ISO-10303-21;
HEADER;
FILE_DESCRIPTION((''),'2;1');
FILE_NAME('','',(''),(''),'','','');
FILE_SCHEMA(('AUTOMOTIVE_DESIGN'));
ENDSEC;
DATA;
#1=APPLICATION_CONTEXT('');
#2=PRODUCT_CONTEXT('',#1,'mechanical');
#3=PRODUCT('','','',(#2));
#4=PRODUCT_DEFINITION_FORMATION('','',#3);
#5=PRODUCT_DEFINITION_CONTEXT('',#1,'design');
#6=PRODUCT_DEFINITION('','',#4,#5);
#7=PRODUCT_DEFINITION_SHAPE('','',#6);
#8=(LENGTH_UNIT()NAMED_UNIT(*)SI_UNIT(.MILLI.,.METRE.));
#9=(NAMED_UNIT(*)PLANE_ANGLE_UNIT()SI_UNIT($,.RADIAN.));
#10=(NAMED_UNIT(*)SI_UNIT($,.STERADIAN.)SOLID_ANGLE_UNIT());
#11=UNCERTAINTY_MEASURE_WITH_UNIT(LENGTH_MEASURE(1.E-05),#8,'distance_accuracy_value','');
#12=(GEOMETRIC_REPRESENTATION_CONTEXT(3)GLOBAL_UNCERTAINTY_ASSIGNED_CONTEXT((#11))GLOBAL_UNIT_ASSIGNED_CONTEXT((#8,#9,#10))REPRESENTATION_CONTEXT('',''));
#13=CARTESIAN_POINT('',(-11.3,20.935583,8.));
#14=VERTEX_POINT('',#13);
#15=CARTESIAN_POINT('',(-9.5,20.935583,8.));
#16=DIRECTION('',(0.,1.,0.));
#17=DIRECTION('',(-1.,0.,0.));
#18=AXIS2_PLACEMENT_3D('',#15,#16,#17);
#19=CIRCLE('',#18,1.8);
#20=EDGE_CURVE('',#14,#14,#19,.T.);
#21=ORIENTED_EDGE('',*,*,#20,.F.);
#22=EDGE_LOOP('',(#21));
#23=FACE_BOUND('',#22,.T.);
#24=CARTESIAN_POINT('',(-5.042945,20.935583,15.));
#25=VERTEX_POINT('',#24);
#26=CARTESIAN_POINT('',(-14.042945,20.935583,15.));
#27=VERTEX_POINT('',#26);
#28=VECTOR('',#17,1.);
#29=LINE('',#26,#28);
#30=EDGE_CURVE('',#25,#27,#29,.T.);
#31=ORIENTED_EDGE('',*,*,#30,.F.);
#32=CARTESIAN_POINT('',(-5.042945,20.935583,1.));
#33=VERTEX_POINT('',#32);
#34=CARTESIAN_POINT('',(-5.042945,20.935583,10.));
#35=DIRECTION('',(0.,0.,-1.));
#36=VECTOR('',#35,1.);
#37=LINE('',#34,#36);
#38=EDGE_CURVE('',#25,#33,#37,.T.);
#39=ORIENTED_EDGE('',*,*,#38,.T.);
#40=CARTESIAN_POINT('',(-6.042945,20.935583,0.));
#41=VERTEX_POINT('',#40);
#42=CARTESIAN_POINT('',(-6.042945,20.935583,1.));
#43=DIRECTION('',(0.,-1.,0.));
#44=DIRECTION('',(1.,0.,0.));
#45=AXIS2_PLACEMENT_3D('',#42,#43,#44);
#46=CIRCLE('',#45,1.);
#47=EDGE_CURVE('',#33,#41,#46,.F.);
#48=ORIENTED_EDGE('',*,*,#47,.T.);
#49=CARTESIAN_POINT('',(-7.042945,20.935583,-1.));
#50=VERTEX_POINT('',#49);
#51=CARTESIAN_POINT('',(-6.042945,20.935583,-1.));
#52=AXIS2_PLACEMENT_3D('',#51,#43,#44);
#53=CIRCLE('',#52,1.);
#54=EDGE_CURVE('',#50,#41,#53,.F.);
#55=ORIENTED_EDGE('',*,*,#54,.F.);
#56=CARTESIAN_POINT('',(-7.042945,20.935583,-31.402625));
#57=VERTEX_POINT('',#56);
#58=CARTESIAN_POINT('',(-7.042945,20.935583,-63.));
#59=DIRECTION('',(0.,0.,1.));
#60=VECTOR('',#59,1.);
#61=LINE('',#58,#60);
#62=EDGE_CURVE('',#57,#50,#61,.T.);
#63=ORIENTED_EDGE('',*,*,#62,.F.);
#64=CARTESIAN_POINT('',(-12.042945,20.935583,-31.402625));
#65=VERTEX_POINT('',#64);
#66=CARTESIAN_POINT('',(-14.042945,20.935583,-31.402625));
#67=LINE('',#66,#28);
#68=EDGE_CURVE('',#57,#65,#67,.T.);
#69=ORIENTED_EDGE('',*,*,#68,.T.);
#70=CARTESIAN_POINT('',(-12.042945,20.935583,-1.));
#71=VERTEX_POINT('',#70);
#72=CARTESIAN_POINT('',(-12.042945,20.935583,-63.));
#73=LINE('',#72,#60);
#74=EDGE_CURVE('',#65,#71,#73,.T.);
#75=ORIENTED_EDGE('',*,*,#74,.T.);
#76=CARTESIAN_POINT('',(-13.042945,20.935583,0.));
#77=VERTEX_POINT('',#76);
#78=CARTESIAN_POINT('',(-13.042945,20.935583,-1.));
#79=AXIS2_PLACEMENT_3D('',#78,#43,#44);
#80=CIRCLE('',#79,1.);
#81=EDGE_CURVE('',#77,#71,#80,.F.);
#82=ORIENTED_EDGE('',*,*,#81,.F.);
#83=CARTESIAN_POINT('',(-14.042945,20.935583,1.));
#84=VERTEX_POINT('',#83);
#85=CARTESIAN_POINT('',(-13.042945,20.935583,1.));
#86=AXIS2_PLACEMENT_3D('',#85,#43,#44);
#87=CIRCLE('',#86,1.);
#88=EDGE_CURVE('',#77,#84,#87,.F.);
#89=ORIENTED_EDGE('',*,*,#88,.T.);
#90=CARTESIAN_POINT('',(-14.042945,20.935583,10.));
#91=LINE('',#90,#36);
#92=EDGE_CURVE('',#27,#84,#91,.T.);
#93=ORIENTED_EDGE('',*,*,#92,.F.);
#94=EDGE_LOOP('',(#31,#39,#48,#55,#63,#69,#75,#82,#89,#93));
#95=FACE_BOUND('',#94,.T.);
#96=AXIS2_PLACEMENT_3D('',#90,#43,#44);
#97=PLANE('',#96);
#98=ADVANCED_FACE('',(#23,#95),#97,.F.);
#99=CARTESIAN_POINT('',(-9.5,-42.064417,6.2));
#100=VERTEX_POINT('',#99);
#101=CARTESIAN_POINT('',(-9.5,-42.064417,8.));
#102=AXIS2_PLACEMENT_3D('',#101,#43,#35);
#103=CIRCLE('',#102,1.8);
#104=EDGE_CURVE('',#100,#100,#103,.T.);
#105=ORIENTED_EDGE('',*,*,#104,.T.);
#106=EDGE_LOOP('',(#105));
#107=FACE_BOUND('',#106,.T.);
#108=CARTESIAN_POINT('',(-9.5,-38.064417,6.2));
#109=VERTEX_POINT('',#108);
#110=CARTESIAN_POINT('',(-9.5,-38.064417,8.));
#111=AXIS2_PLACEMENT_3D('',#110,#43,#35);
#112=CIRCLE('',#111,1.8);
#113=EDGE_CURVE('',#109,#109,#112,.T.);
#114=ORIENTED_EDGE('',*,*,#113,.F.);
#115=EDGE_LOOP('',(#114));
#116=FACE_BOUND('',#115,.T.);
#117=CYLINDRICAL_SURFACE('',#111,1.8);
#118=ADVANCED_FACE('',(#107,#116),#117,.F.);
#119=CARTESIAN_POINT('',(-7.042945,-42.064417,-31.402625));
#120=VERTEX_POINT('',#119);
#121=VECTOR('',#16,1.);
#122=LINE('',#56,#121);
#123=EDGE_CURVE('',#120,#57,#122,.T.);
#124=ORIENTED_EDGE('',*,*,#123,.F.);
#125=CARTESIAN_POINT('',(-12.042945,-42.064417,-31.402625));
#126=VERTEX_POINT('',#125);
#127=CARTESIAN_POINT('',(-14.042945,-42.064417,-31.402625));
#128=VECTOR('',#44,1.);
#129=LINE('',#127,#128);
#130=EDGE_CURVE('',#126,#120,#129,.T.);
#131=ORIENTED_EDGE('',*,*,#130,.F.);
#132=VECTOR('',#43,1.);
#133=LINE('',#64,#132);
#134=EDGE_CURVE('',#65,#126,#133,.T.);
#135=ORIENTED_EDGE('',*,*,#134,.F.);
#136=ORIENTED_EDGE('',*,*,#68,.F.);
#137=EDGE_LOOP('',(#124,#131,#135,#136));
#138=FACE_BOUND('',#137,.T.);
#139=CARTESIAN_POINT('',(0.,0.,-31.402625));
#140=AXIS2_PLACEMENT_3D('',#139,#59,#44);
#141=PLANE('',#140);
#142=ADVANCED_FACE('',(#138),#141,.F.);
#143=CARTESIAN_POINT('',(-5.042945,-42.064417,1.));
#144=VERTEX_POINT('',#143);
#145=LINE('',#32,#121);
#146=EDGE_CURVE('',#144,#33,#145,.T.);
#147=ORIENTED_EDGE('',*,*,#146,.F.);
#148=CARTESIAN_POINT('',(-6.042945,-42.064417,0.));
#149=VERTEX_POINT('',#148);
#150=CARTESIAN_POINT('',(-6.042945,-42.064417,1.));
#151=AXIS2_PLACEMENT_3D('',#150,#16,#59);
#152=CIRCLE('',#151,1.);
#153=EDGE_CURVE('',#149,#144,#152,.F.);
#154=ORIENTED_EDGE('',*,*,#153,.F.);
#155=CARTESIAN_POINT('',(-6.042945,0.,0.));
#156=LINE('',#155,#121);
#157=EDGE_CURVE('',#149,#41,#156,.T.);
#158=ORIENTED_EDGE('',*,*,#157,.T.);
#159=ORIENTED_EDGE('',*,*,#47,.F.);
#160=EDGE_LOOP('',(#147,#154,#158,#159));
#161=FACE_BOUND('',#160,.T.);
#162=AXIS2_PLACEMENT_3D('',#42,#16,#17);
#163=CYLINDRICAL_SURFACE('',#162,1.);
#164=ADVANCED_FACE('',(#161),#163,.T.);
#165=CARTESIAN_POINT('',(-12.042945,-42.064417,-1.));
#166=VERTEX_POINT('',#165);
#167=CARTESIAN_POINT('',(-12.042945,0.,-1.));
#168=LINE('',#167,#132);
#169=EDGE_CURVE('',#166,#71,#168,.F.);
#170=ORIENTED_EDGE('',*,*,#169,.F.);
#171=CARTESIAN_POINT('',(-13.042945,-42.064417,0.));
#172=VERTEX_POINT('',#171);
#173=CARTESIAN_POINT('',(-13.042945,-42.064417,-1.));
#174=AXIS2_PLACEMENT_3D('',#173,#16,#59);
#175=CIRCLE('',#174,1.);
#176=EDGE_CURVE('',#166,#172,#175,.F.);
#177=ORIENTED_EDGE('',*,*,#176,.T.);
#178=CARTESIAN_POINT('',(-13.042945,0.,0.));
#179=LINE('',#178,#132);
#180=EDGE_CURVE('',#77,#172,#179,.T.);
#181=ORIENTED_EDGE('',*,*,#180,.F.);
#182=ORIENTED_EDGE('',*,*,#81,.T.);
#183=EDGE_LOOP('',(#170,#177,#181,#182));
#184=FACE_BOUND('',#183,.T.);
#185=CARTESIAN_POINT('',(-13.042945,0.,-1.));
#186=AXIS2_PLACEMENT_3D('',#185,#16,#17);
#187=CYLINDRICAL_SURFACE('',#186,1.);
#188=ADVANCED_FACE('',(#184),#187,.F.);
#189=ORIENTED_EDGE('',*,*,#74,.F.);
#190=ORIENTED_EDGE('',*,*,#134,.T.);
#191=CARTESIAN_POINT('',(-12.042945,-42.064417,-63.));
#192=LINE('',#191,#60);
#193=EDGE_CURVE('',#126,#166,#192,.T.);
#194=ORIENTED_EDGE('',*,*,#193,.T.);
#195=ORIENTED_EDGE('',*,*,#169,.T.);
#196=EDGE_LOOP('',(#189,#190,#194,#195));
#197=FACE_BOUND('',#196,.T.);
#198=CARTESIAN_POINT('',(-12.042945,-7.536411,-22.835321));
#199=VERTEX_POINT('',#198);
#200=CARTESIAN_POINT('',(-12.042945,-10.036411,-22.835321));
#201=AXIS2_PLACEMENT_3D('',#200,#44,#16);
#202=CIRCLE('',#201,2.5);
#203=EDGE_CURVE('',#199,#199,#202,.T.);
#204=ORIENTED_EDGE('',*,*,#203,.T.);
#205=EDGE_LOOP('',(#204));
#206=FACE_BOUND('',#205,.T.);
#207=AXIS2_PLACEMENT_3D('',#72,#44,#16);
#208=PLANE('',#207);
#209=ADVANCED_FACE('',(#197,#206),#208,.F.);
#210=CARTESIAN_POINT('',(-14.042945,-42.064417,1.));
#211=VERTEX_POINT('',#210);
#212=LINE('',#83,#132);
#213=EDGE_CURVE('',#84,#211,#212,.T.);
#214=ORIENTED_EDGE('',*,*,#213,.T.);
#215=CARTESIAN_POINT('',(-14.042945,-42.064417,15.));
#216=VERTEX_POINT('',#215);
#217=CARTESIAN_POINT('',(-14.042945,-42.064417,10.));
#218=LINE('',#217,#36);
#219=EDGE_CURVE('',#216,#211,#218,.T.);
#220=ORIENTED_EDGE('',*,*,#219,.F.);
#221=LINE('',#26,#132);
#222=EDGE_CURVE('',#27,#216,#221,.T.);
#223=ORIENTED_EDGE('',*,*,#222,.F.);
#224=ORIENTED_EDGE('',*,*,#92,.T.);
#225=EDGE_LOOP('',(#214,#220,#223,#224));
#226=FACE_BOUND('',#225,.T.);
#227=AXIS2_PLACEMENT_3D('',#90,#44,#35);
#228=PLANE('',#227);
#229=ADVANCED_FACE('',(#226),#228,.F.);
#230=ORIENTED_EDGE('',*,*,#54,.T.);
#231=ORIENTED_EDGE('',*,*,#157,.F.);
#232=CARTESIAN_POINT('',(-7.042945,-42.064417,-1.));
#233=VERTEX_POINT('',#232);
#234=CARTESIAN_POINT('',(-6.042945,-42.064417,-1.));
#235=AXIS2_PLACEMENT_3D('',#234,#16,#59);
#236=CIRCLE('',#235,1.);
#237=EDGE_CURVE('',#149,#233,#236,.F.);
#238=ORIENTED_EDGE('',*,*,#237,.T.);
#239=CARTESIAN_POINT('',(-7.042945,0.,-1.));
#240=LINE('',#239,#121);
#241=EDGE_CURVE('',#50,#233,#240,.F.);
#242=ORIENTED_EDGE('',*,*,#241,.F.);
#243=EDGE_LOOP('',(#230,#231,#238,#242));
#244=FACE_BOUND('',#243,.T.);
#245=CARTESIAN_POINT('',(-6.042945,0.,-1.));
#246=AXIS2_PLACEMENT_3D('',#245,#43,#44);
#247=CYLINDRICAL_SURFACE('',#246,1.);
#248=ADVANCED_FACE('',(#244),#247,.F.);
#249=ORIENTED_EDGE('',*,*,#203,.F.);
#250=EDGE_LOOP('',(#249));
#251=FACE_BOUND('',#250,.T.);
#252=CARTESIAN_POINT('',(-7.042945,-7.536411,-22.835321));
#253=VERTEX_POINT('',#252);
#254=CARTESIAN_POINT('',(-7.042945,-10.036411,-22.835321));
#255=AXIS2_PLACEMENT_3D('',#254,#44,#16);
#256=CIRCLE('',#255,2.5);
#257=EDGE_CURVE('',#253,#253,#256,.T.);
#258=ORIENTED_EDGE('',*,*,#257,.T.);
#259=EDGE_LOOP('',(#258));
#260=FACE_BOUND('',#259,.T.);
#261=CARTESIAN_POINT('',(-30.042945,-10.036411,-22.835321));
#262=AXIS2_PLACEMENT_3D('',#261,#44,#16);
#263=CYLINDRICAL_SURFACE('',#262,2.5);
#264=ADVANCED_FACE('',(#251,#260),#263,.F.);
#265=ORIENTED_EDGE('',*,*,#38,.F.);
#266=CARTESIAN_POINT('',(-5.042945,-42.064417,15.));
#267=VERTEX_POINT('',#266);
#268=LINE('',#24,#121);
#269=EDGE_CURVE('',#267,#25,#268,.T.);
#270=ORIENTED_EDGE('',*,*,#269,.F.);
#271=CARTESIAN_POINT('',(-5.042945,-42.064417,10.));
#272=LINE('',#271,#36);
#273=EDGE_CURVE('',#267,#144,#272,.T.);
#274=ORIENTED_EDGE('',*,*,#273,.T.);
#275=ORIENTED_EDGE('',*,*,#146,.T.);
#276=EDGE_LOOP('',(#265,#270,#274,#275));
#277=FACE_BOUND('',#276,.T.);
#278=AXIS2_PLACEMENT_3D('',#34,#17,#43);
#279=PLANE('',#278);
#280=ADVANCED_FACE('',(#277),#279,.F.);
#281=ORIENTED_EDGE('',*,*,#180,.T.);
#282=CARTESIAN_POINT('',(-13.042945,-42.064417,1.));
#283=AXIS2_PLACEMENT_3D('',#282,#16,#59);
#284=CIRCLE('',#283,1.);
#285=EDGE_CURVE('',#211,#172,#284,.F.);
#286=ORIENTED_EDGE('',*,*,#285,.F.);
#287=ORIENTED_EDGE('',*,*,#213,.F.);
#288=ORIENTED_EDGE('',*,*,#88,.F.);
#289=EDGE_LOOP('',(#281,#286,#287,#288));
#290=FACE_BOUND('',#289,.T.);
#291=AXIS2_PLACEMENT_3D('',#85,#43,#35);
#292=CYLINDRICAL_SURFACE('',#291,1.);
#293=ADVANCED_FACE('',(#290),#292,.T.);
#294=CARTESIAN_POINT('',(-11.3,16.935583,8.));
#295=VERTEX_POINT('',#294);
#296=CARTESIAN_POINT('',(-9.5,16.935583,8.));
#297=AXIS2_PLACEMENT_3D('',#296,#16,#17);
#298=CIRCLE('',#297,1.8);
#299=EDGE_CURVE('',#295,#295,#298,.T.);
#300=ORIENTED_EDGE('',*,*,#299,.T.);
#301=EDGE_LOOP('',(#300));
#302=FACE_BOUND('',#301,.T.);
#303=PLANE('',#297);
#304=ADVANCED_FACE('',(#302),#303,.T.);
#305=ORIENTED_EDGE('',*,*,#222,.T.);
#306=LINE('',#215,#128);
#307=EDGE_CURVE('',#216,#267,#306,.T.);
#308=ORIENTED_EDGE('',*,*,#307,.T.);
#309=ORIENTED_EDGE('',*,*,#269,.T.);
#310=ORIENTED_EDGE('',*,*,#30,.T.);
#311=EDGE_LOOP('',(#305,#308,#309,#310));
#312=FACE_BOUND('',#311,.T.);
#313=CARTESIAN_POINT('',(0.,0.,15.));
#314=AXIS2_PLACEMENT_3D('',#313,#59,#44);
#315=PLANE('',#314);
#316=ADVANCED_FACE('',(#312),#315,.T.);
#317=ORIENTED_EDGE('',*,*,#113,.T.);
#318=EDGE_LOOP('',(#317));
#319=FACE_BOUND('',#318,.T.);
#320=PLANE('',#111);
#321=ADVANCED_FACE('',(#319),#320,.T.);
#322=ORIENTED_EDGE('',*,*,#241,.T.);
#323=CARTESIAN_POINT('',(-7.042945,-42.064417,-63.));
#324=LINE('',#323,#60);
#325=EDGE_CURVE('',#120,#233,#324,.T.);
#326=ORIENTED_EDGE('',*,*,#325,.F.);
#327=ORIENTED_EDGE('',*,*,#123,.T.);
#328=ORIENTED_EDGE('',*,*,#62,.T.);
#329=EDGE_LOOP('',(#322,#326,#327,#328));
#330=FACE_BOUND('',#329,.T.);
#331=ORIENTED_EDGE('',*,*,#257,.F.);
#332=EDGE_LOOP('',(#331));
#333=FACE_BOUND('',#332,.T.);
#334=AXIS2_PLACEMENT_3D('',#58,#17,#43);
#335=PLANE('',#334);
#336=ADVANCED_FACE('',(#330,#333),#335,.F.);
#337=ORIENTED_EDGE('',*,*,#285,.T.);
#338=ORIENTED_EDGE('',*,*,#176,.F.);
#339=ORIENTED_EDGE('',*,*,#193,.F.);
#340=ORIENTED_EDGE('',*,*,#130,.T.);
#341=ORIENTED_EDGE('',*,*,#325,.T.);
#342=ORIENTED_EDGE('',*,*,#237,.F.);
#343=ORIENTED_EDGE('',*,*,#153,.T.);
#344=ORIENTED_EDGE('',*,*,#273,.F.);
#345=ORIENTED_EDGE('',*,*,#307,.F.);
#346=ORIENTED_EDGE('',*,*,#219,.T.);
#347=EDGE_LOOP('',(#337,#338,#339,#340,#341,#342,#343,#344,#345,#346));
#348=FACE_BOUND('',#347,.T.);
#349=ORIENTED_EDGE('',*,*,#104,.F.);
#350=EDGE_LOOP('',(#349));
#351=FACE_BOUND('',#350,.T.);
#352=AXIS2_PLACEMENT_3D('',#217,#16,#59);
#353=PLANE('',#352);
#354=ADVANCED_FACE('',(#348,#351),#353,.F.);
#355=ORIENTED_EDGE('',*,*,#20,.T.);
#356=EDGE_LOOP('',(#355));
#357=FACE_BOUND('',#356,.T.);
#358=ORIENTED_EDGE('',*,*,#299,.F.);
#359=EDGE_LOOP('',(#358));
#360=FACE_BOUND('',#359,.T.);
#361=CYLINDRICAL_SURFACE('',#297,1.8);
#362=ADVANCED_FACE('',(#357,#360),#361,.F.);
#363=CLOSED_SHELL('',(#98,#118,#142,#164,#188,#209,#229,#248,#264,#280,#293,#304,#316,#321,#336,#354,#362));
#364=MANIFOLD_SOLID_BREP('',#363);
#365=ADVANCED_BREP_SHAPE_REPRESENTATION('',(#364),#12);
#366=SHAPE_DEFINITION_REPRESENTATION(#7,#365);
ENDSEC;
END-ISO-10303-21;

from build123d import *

# Parameters (mm, degrees)
ESQUISSE1_W                  = 9
ESQUISSE1_H                  = 63
BOSS_EXTRU_1_DEPTH           = 10
ESQUISSE2_W                  = 5
ESQUISSE2_H                  = 63
BOSS_EXTRU_2_DEPTH           = 63
CONG_3_R                     = 1
CONG_4_R                     = 1
CONG_5_R                     = 1
CONG_6_R                     = 1
ESQUISSE3_R                  = 2.5
ENL_V_MAT_EXTRU_1_DEPTH      = 77.075062882
ENL_V_MAT_EXTRU_3_DEPTH      = 77.075062882
ENL_V_MAT_EXTRU_3_DEPTH_BACK = 77.075062882
ESQUISSE9_R                  = 2.5
ENL_V_MAT_EXTRU_4_DEPTH      = 23
ESQUISSE12_W                 = 9
ESQUISSE12_H                 = 63
BOSS_EXTRU_4_DEPTH           = 5
ESQUISSE13_R                 = 1.8
ENL_V_MAT_EXTRU_6_DEPTH      = 4
ENL_V_START                  = -4
ESQUISSE14_R                 = 1.8
ENL_V_MAT_EXTRU_7_DEPTH      = 4


with BuildPart() as part:
    # Esquisse1 → Boss.-Extru.1 (new body)
    with BuildSketch(Plane.XY):
        with Locations((-9.542944785, -10.564417178)):
            Rectangle(ESQUISSE1_W, ESQUISSE1_H)
    extrude(amount=BOSS_EXTRU_1_DEPTH)

    # Esquisse2 → Boss.-Extru.2 (add)
    with BuildSketch(Plane(origin=(0, 0, 0), x_dir=(-1, 0, 0), z_dir=(0, 0, -1))):
        with Locations((9.542944785, -10.564417178)):
            Rectangle(ESQUISSE2_W, ESQUISSE2_H)
    extrude(amount=BOSS_EXTRU_2_DEPTH)

    # Congé3
    cong_3_edges = [part.edges().sort_by_distance(p)[0] for p in [
        (-7.042944785, -10.564417178, 0),
    ]]
    fillet(cong_3_edges, radius=CONG_3_R)

    # Congé4
    cong_4_edges = [part.edges().sort_by_distance(p)[0] for p in [
        (-12.042944785, -10.564417178, 0),
    ]]
    fillet(cong_4_edges, radius=CONG_4_R)

    # Congé5
    cong_5_edges = [part.edges().sort_by_distance(p)[0] for p in [
        (-5.042944785, -10.564417178, 0),
    ]]
    fillet(cong_5_edges, radius=CONG_5_R - 0.0001)  # a hair under: the kernel refuses the full size

    # Congé6
    cong_6_edges = [part.edges().sort_by_distance(p)[0] for p in [
        (-14.042944785, -10.564417178, 0),
    ]]
    fillet(cong_6_edges, radius=CONG_6_R - 0.0001)  # a hair under: the kernel refuses the full size

    # Esquisse3 → Enlèv. mat.-Extru.1 (cut, through all)
    with BuildSketch(Plane.ZY.offset(12.042944785)):
        with Locations(Location((-43, -10.564417178, 0), (0, 0, 270))):
            Circle(ESQUISSE3_R)
    extrude(amount=-ENL_V_MAT_EXTRU_1_DEPTH, mode=Mode.SUBTRACT)

    # Esquisse7 → Enlèv. mat.-Extru.3 (cut, two sides: drawn at the far end of the back side and taken through both)
    with BuildSketch(Plane(origin=(-7.042944785, 0, 0), x_dir=(0, 0, -1), z_dir=(1, 0, 0)).offset(-ENL_V_MAT_EXTRU_3_DEPTH_BACK)):
        Polygon((51.248405369, 207.781395644), (51.248405369, 20.935582822), (51.248405369, -42.839359106), (51.248405369, -229.685171928), (424.940031013, -229.685171928), (424.940031013, 207.781395644), align=None)
    extrude(amount=ENL_V_MAT_EXTRU_3_DEPTH + ENL_V_MAT_EXTRU_3_DEPTH_BACK, mode=Mode.SUBTRACT)


with BuildPart() as body_2:
    # Fractionner1: the piece on the far side of the plane
    add(part.part)
    split(bisect_by=Plane.XY.offset(-31.402624734), keep=Keep.BOTTOM)


with BuildPart() as part_1:
    add(part.part)

    # Fractionner1
    split(bisect_by=Plane.XY.offset(-31.402624734), keep=Keep.TOP)

    # Esquisse9 → Enlèv. mat.-Extru.4 (cut)
    with BuildSketch(Plane(origin=(-7.042944785, 0, 0), x_dir=(0, 0, -1), z_dir=(1, 0, 0))):
        with Locations(Location((22.835321424, -10.036411033, 0), (0, 0, 90))):
            Circle(ESQUISSE9_R)
    extrude(amount=-ENL_V_MAT_EXTRU_4_DEPTH, mode=Mode.SUBTRACT)

    # Esquisse12 → Boss.-Extru.4 (add)
    with BuildSketch(Plane.XY.offset(10)):
        with Locations((-9.542944785, -10.564417178)):
            Rectangle(ESQUISSE12_W, ESQUISSE12_H)
    extrude(amount=BOSS_EXTRU_4_DEPTH)

    # Esquisse13 → Enlèv. mat.-Extru.6 (cut)
    with BuildSketch(Plane(origin=(0, 20.935582822, 0), x_dir=(1, 0, 0), z_dir=(0, 1, 0))):
        with Locations(Location((-9.5, -8, 0), (0, 0, 180))):
            Circle(ESQUISSE13_R)
    extrude(amount=-ENL_V_MAT_EXTRU_6_DEPTH, mode=Mode.SUBTRACT)

    # Esquisse14 → Enlèv. mat.-Extru.7 (cut)
    with BuildSketch(Plane(origin=(0, -42.064417178, 0), x_dir=(-1, 0, 0), z_dir=(0, -1, 0)).offset(ENL_V_START)):
        with Locations((9.5, -8)):
            Circle(ESQUISSE14_R)
    extrude(amount=ENL_V_MAT_EXTRU_7_DEPTH, mode=Mode.SUBTRACT)


solid = part_1.part
